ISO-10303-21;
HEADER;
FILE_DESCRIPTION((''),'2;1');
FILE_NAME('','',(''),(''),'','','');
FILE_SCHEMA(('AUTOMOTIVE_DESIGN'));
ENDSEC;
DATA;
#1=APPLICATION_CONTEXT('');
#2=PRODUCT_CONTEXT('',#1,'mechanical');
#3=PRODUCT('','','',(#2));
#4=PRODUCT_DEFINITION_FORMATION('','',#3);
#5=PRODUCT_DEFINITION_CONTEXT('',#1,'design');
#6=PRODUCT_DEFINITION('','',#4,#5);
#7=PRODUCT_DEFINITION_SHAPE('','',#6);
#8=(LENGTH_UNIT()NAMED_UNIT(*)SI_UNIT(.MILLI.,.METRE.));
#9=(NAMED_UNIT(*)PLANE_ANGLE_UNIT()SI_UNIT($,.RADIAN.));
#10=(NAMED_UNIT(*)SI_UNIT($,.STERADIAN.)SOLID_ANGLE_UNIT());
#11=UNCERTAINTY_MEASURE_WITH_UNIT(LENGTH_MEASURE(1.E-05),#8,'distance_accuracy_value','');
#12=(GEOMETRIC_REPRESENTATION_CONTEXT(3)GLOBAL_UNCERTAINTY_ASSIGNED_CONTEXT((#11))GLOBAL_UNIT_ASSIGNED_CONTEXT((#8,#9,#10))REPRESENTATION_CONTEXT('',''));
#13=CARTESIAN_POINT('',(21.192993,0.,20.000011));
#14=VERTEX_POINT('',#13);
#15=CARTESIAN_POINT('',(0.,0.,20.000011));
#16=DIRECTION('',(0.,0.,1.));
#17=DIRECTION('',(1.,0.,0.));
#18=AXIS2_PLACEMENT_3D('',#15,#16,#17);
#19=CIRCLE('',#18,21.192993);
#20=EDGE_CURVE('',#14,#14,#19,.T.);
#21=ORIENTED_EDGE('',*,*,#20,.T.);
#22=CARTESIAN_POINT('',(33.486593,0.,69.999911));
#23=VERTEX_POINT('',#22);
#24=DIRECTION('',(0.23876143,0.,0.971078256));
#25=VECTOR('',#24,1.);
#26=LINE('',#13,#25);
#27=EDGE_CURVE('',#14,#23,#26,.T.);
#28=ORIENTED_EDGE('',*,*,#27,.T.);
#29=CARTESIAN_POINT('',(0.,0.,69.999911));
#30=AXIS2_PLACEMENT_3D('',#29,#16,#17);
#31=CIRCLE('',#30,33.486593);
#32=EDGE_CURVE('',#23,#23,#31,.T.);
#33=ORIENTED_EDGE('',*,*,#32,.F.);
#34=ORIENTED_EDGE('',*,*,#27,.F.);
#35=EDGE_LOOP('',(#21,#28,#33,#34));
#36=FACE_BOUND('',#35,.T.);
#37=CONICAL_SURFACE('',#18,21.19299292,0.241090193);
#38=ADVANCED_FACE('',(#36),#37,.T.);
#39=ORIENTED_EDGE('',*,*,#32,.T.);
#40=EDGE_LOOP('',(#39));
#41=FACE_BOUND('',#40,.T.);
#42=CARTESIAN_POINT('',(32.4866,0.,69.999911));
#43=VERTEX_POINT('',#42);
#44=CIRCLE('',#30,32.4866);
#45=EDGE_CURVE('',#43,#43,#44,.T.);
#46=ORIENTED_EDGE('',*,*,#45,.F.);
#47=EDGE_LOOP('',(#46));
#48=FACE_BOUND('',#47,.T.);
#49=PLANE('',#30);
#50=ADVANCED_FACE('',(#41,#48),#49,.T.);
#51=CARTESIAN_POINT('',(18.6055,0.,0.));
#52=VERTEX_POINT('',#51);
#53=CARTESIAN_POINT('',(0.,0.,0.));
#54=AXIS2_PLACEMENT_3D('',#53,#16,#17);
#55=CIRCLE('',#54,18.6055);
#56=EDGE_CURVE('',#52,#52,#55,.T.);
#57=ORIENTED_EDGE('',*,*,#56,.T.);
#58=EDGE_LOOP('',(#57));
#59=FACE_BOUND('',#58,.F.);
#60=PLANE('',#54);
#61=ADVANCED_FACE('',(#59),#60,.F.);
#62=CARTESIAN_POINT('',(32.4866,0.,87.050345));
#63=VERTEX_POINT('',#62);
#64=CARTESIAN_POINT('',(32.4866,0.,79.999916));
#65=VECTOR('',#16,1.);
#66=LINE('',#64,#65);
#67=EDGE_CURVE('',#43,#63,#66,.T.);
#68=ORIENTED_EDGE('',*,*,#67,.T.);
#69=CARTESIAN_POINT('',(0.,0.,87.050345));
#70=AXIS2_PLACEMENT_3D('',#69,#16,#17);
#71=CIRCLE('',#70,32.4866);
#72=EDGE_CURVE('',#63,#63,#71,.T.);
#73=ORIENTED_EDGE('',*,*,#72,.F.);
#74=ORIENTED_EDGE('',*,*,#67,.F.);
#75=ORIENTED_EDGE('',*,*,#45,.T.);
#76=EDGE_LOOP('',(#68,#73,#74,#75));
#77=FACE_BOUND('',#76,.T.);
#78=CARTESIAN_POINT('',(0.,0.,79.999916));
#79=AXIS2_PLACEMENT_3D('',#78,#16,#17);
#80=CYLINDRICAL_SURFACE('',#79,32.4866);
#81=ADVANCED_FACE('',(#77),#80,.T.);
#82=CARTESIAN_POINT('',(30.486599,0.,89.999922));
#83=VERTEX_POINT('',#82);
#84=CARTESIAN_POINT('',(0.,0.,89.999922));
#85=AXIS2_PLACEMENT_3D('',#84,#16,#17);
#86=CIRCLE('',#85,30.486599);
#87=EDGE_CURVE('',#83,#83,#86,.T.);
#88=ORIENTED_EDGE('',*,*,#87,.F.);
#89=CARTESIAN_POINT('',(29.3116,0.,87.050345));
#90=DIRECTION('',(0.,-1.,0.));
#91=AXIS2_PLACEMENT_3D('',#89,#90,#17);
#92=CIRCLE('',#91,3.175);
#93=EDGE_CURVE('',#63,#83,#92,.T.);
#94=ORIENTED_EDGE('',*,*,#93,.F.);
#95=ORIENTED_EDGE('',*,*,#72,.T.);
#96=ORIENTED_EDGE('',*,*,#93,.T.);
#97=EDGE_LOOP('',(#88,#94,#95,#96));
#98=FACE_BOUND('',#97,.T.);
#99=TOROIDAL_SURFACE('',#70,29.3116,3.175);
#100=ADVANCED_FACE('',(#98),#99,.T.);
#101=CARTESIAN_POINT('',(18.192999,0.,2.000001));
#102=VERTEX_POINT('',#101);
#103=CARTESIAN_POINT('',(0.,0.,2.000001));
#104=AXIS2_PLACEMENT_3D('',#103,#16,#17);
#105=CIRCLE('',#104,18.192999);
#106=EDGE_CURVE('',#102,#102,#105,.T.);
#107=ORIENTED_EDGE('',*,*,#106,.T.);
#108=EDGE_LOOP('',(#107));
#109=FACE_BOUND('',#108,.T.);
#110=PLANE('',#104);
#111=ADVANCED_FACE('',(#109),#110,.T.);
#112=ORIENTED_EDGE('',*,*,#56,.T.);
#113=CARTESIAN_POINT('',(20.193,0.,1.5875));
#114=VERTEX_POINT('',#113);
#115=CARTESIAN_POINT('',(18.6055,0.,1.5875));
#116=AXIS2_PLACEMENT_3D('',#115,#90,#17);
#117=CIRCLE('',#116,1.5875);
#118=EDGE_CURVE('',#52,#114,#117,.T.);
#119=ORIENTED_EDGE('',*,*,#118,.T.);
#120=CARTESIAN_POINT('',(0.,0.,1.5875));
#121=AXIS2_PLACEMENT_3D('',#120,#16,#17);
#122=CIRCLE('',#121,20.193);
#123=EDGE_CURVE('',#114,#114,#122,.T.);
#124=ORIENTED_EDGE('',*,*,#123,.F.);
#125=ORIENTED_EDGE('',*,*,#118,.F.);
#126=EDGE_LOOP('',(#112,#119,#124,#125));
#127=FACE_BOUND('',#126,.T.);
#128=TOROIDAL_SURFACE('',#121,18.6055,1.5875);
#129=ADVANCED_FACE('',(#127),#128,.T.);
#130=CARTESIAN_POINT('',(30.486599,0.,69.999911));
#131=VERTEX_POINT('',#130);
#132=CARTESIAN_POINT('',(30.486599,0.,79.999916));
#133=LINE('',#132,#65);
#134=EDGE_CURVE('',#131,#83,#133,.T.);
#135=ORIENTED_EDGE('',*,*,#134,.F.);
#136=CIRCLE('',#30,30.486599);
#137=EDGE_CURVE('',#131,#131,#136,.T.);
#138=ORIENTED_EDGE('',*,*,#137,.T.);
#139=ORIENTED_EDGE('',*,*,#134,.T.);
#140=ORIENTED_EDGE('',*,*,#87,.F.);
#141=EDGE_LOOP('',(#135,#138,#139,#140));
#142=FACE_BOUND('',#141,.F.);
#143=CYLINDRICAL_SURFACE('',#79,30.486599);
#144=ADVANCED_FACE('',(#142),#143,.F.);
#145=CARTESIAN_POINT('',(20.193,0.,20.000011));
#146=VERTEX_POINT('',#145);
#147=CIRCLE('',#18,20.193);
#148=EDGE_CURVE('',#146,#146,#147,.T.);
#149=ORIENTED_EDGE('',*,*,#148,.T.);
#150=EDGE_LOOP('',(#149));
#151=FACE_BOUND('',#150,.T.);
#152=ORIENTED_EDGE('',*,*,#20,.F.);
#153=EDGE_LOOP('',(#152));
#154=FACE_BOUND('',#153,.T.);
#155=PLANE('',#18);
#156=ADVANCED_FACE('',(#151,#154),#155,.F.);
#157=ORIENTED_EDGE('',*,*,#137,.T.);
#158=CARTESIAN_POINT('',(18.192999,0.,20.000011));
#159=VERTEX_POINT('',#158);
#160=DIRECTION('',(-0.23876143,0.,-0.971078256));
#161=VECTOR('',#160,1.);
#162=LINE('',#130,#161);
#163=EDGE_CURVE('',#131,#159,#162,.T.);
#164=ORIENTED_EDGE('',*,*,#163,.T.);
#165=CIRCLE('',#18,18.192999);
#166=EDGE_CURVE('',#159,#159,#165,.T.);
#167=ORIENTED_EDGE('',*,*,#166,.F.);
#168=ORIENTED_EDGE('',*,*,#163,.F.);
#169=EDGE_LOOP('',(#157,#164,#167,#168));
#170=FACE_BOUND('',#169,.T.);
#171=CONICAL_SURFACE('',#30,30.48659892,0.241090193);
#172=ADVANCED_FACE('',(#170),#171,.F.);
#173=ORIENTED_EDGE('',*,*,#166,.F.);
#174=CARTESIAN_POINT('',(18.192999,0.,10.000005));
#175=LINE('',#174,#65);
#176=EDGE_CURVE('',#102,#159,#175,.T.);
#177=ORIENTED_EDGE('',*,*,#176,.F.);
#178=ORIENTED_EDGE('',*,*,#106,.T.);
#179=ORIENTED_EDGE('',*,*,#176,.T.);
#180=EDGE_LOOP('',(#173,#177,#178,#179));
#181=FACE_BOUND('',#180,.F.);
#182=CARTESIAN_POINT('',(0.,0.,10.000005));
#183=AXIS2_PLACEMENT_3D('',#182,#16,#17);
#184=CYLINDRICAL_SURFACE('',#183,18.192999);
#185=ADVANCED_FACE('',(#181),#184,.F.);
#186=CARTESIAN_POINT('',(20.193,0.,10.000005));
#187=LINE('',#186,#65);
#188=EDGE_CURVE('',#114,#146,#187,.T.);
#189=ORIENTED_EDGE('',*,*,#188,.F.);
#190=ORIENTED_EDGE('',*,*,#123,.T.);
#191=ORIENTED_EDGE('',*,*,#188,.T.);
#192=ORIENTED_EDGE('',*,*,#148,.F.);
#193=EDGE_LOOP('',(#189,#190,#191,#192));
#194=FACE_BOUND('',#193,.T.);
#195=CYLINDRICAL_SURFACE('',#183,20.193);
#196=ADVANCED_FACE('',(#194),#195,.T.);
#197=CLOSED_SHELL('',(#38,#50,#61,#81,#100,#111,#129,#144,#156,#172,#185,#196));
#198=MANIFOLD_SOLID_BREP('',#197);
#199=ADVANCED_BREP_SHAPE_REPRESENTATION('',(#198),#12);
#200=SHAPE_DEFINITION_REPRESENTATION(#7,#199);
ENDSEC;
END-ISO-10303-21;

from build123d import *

# Parameters (mm, degrees)
F0_W     = 2.00000108
F0_H     = 20.0000108
F2_R     = 18.19299892
F3_DEPTH = 2.00000108
F4_R     = 1.5875


# Not quite as in the source:
# - a fillet or chamfer that OpenCascade refuses, or shapes differently, is made with other operations: its cross-section is extruded or revolved along the edge and cut away or added


with BuildPart() as f1:
    # F0 (on Front) → F1 (revolve)
    with BuildSketch(Plane.XZ):
        with Locations((19.19299946, 10.0000054)):
            Rectangle(F0_W, F0_H)
        Polygon((30.48659892, 69.9999108), (18.19299892, 20.0000108), (20.193, 20.0000108), (21.19299292, 20.0000108), (33.48659292, 69.9999108), (32.4866, 69.9999108), align=None)
        with Locations((31.48659946, 79.9999162)):
            Rectangle(F0_W, F0_H)
    revolve(axis=Axis((0, 0, 12.2811223036), (0, 0, 1)))

    # F2 (on Top) → F3 (join)
    with BuildSketch(Plane.XY):
        Circle(F2_R)
    extrude(amount=F3_DEPTH)

    # F4
    f4_edges = [f1.edges().sort_by_distance(p)[0] for p in [
        (-20.193, 0, 0),
    ]]
    fillet(f4_edges, radius=F4_R)

    # F5: fillet of radius 3.175 on 1 edges, made by hand

    # F5_s1 → F5_t2 (revolve, cut)
    with BuildSketch(Plane.XZ):
        with BuildLine():
            ThreePointArc((32.4866, 87.050344929), (31.9394552634, 88.8321983782), (30.48659892, 89.9999216))
            Line((30.48659892, 89.9999216), (32.4866, 89.9999216))
            Line((32.4866, 89.9999216), (32.4866, 87.050344929))
        make_face()
    revolve(axis=Axis((0, 0, 89.9999216), (0, 0, 1)), mode=Mode.SUBTRACT)


solid = f1.part
